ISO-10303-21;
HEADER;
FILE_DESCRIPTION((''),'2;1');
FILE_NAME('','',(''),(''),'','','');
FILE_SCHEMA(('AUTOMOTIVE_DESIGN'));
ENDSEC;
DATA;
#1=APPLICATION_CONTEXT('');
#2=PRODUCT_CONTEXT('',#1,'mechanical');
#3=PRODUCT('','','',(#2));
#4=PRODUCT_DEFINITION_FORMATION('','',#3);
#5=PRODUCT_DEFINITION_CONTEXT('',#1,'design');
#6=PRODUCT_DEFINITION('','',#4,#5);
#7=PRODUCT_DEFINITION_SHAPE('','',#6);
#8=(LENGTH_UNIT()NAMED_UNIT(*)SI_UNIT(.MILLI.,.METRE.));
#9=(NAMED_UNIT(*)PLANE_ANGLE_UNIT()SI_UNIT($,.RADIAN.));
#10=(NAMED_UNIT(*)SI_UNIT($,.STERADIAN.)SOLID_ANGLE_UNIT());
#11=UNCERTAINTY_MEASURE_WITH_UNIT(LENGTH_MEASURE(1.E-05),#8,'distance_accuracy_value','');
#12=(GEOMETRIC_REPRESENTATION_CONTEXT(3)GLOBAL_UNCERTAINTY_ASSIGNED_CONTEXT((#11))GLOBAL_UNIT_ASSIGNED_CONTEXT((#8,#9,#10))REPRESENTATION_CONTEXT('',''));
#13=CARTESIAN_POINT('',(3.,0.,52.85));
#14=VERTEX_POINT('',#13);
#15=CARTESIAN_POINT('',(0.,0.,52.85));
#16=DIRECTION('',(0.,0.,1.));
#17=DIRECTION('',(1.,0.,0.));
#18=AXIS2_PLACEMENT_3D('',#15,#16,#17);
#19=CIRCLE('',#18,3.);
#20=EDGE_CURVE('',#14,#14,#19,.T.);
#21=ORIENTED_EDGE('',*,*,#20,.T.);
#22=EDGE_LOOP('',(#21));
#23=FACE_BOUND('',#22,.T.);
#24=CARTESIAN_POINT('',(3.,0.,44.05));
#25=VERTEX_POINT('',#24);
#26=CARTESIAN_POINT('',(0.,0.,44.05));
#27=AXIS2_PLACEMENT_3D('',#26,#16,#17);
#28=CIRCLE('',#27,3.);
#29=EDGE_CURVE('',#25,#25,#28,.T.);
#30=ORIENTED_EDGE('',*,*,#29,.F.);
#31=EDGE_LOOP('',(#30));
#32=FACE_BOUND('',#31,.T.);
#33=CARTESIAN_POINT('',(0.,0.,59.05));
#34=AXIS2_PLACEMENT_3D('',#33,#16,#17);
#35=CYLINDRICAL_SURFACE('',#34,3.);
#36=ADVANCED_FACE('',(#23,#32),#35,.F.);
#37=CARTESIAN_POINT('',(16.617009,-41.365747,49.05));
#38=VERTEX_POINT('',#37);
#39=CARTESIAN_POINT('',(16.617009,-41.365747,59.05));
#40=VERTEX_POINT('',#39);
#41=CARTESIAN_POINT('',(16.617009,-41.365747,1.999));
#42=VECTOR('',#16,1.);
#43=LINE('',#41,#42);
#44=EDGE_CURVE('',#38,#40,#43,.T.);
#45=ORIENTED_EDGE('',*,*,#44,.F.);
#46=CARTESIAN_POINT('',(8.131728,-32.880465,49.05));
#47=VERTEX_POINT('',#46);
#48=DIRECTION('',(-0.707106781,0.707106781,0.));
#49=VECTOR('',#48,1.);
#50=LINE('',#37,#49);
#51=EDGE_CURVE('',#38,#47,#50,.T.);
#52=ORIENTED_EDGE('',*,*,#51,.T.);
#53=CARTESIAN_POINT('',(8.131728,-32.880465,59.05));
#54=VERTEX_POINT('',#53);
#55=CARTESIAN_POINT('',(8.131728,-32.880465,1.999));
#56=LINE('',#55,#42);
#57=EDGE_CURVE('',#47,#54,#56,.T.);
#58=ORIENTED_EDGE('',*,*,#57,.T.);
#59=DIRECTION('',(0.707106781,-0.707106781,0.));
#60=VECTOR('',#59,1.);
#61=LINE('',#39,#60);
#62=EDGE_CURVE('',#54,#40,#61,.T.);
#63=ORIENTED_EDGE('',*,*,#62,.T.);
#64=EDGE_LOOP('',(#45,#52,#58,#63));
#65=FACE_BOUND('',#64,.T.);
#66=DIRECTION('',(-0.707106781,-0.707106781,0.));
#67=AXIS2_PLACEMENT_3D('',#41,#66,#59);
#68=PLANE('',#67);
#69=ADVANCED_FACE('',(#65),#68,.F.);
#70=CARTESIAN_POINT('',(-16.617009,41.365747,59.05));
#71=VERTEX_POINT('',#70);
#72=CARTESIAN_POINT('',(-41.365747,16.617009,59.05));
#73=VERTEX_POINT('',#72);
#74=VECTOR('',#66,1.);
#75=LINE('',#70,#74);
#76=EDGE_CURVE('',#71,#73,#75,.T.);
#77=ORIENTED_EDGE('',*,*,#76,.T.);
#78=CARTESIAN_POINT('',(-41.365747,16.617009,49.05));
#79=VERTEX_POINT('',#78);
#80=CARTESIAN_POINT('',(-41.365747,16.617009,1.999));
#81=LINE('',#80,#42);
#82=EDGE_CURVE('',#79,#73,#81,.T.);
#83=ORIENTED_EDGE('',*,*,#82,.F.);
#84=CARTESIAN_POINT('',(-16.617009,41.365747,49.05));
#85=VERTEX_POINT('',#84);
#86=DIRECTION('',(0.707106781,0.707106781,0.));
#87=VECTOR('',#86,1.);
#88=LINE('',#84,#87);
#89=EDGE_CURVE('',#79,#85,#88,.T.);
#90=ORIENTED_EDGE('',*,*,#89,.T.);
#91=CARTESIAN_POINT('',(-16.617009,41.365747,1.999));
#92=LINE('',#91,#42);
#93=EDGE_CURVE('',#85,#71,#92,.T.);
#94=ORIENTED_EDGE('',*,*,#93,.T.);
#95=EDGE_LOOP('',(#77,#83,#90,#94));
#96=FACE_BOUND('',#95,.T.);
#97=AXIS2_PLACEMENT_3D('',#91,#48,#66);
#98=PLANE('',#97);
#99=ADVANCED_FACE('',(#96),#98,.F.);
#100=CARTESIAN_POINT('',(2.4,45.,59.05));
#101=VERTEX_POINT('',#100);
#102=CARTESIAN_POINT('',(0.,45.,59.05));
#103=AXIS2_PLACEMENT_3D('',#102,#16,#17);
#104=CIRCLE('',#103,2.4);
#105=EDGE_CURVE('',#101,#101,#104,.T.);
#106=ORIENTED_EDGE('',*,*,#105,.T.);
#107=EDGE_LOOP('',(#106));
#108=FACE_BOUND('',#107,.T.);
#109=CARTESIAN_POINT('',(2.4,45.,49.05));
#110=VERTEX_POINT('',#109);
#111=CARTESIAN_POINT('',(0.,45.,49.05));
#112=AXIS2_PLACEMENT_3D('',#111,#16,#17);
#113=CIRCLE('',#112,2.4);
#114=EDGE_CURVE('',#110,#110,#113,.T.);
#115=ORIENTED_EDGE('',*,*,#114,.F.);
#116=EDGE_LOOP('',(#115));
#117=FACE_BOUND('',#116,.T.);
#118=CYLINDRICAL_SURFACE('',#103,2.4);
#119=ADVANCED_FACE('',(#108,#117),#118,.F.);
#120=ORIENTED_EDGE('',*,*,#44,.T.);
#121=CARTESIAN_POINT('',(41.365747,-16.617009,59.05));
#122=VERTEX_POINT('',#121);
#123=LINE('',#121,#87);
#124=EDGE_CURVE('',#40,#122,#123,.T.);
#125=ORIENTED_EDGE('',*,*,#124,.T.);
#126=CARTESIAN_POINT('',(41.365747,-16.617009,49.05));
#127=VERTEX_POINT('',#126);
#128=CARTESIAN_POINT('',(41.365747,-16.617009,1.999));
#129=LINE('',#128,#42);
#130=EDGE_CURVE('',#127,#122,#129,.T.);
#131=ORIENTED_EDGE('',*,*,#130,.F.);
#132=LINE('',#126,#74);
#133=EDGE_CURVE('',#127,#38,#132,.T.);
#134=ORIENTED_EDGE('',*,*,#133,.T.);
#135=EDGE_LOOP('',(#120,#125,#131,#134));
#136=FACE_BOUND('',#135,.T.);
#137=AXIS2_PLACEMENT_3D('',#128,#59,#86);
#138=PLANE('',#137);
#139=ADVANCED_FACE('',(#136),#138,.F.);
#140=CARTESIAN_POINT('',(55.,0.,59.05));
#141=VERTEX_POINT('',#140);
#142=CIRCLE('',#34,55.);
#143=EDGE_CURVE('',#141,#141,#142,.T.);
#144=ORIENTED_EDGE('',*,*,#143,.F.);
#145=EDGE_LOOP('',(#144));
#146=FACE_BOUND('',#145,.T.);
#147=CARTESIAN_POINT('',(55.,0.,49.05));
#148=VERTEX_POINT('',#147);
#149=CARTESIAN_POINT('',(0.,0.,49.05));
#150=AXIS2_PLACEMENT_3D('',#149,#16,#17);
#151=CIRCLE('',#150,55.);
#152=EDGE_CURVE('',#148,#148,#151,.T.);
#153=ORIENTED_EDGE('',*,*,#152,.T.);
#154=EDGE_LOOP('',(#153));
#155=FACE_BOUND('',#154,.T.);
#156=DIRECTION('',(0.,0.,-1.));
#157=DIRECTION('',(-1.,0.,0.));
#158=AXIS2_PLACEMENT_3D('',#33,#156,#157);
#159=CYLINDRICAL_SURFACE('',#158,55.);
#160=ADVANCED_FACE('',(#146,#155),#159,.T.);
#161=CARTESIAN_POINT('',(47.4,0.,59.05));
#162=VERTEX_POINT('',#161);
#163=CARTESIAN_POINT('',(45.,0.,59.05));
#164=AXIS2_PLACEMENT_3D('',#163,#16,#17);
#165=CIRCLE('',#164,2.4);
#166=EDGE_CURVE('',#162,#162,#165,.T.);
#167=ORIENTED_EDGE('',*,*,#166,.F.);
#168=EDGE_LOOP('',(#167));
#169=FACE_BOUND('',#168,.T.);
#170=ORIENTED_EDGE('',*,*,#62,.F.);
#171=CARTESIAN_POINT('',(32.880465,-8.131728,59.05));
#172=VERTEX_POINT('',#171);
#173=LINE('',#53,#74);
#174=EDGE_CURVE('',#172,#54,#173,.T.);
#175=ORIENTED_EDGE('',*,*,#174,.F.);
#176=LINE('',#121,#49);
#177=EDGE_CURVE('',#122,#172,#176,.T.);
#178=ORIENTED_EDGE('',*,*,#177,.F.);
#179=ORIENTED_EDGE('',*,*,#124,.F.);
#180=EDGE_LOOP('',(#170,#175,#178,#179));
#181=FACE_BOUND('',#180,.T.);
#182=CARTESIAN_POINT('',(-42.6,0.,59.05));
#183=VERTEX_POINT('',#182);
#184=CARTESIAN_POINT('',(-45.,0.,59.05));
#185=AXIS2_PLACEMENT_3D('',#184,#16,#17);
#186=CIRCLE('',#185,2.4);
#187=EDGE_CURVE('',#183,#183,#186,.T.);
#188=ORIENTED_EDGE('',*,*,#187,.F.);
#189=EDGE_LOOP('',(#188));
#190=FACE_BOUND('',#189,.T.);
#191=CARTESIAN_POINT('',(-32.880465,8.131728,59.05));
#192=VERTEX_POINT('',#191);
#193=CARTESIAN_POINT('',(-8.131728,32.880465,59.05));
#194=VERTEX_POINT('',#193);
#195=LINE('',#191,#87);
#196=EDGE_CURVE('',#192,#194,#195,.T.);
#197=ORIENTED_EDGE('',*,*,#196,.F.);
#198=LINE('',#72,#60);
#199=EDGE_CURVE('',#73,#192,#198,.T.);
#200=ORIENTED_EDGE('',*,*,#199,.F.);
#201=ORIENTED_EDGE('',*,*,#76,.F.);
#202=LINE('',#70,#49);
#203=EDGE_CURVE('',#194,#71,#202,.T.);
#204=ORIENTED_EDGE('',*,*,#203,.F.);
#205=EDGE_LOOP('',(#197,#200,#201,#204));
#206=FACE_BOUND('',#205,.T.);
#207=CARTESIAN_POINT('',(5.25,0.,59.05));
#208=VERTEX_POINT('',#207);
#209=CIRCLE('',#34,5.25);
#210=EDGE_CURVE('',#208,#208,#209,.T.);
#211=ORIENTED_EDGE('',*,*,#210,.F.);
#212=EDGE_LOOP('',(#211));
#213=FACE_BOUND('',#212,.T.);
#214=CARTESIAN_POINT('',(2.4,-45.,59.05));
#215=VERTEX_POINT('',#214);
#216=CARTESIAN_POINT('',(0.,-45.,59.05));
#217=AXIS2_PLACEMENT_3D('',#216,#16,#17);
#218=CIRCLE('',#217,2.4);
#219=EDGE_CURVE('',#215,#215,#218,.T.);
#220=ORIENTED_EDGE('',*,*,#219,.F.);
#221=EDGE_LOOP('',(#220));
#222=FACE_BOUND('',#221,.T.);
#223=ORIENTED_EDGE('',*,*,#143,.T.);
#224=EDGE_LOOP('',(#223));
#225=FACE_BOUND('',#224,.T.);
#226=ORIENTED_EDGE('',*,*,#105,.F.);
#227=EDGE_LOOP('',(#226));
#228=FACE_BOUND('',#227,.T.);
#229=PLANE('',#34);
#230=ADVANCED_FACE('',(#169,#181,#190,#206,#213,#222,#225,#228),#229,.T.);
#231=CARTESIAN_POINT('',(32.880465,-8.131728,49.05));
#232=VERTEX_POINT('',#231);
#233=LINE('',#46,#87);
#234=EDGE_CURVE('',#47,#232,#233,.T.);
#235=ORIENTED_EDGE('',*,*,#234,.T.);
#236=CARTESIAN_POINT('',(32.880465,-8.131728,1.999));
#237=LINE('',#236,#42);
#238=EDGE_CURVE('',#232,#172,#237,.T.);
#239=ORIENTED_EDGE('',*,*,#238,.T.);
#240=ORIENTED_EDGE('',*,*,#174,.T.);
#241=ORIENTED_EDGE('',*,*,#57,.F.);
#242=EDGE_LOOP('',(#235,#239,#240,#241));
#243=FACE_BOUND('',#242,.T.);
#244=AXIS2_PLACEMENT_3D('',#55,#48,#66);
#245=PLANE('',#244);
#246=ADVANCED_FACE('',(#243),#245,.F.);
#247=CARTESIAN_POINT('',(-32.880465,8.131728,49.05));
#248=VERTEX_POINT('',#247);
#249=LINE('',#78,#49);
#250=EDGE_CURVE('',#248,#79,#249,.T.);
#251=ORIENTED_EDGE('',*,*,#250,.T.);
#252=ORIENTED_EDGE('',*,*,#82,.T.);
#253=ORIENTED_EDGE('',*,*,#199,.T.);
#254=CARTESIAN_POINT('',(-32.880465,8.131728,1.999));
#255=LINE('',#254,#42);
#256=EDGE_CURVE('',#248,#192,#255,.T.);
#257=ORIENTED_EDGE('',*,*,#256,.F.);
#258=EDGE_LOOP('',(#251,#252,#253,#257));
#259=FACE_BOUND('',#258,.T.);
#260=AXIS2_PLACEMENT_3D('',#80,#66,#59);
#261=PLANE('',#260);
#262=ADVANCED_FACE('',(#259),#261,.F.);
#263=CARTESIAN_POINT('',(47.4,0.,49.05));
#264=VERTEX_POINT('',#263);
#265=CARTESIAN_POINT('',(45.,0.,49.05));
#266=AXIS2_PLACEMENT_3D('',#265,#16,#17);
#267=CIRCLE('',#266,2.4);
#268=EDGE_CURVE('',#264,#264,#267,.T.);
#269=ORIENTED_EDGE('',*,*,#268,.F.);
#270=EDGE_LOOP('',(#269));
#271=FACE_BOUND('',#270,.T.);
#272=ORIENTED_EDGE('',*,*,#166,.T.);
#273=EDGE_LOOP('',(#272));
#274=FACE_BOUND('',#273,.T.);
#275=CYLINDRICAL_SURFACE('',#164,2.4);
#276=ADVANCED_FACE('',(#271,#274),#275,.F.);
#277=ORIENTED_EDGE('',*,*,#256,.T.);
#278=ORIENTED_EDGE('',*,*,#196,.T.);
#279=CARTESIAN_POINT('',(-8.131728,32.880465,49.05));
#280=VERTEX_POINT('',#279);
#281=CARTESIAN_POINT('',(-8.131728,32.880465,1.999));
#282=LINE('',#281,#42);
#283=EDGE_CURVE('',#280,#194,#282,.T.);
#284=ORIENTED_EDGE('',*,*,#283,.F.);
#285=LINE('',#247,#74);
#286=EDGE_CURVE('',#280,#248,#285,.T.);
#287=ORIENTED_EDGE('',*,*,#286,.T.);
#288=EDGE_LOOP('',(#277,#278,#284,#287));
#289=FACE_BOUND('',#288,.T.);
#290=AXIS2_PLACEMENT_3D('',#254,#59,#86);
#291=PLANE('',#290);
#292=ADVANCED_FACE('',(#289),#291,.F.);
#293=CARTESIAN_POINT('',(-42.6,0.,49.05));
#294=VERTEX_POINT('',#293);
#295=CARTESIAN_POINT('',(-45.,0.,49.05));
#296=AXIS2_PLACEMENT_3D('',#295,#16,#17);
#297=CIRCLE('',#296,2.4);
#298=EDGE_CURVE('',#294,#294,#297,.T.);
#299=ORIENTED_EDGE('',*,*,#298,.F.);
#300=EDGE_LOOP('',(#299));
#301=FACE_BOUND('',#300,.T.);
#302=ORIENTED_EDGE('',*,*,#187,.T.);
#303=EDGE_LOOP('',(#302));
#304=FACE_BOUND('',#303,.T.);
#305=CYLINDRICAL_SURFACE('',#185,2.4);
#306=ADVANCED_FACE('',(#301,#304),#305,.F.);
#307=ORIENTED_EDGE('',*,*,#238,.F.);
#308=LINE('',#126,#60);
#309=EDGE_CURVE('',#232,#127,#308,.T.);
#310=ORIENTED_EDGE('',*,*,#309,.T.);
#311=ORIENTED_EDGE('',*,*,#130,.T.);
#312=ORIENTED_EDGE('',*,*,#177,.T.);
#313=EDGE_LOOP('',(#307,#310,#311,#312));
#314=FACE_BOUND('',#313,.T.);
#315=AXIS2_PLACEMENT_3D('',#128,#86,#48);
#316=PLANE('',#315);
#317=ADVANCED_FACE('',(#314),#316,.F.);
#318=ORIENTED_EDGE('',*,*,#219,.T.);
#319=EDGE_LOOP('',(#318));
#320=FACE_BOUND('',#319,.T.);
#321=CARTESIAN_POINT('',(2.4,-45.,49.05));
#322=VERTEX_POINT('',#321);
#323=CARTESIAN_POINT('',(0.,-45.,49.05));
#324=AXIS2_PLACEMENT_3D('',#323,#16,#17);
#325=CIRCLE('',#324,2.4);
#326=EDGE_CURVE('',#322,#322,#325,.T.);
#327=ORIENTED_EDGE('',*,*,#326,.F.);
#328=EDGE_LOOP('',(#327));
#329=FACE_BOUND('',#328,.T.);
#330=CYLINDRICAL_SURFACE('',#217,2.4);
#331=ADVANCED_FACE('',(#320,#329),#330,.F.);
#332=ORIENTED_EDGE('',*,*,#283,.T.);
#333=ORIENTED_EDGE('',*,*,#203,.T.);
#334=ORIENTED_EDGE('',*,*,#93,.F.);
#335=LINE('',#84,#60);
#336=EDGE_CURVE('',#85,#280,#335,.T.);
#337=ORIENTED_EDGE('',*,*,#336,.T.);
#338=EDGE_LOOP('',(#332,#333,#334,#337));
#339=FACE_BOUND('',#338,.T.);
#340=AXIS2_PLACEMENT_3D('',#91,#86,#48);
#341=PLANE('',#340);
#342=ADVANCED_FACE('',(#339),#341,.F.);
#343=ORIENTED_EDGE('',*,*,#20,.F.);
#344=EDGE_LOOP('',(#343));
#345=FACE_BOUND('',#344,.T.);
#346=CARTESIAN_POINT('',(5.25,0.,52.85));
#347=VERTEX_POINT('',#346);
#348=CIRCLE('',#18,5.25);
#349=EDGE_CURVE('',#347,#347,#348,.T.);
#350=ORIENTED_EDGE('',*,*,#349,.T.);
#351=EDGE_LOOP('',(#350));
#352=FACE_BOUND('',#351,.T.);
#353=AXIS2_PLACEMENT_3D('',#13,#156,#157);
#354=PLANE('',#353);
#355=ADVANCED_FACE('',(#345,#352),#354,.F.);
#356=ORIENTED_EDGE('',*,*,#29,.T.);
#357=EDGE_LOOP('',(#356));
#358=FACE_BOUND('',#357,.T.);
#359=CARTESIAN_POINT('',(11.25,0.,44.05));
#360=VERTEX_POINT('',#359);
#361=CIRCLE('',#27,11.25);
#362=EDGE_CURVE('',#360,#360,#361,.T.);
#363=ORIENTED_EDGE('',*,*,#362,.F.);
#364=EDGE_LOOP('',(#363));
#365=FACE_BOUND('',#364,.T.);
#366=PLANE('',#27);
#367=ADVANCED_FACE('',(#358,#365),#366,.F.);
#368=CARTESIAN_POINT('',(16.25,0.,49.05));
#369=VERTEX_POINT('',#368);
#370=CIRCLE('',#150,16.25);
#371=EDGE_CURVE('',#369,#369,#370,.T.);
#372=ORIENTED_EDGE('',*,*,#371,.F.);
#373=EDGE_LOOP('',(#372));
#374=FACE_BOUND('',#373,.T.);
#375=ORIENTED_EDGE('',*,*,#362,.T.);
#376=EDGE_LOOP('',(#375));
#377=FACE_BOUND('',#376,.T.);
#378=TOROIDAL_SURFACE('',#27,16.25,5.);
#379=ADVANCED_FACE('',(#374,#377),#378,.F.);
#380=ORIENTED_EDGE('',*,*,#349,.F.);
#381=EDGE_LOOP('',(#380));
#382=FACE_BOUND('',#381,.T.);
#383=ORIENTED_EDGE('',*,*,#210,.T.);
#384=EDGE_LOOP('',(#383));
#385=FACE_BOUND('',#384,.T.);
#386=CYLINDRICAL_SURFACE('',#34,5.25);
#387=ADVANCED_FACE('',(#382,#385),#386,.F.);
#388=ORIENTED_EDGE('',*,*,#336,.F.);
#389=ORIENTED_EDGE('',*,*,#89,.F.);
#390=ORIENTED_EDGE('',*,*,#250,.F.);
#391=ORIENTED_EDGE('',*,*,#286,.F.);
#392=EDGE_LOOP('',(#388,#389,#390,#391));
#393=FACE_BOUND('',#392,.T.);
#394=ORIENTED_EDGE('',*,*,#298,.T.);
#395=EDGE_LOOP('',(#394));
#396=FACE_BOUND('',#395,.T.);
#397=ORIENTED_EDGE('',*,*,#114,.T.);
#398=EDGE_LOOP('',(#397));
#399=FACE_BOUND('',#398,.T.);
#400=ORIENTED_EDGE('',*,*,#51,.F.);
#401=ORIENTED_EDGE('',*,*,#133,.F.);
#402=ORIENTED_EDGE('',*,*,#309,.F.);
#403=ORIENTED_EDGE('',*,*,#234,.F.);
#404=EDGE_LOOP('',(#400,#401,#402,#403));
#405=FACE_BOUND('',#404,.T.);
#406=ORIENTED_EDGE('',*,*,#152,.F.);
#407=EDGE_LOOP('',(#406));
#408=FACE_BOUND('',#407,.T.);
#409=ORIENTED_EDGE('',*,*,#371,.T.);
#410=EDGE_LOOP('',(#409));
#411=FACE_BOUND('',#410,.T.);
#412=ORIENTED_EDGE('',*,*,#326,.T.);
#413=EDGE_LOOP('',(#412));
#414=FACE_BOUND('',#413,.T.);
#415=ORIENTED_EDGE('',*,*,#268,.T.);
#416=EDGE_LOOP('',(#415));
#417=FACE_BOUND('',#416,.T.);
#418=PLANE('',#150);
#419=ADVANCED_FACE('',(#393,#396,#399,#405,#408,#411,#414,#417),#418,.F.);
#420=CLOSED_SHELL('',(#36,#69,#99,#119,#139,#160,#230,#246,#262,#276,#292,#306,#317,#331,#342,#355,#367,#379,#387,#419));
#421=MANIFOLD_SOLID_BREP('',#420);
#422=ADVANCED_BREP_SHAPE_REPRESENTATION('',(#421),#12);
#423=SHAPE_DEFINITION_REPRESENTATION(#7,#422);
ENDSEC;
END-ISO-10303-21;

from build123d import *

# Parameters (mm, degrees)
SKETCH1_R                               = 7.5
BOSS_EXTRUDE1_DEPTH                     = 20.05
SKETCH3_W                               = 5
SKETCH3_H                               = 5
CUT_EXTRUDE1_DEPTH                      = 21
SKETCH6_R                               = 8.5
BOSS_EXTRUDE2_DEPTH                     = 24
SKETCH7_R                               = 11.25
BOSS_EXTRUDE3_DEPTH                     = 5
SKETCH8_R                               = 55
BOSS_EXTRUDE4_DEPTH                     = 10
FILLET1_R                               = 0.6
FILLET2_R                               = 5
M4_CLEARANCE_HOLE1_D                    = 4.8
M6X1_0_TAPPED_HOLE2_D                   = 5
M6X1_0_TAPPED_HOLE2_DEPTH               = 23.497848452
M6X1_0_TAPPED_HOLE2_TIP                 = 1.502151548
SKETCH13_R                              = 7.5
CUT_EXTRUDE2_DEPTH                      = 2
CUT_EXTRUDE3_REACH                      = 98.461
SKETCH15_R                              = 36.682415144
CUT_EXTRUDE4_DEPTH                      = 42.05
CBORE_FOR_M6_HEX_HEAD_BOLT1_D           = 6
CBORE_FOR_M6_HEX_HEAD_BOLT1_CBORE_D     = 10.5
CBORE_FOR_M6_HEX_HEAD_BOLT1_CBORE_DEPTH = 6.2


with BuildPart() as part:
    # Sketch1 → Boss-Extrude1 (new body)
    with BuildSketch(Plane.XY):
        Circle(SKETCH1_R)
    extrude(amount=BOSS_EXTRUDE1_DEPTH)

    # Sketch3 → Cut-Extrude1 (cut)
    with BuildSketch(Plane(origin=(0, 0, 0), x_dir=(-1, 0, 0), z_dir=(0, 0, -1))):
        with Locations((0, 7.5)):
            Rectangle(SKETCH3_W, SKETCH3_H)
    extrude(amount=-CUT_EXTRUDE1_DEPTH, mode=Mode.SUBTRACT)

    # Sketch6 → Boss-Extrude2 (add)
    with BuildSketch(Plane.XY.offset(20.05)):
        Circle(SKETCH6_R)
    extrude(amount=BOSS_EXTRUDE2_DEPTH)

    # Sketch7 → Boss-Extrude3 (add)
    with BuildSketch(Plane.XY.offset(44.05)):
        Circle(SKETCH7_R)
    extrude(amount=BOSS_EXTRUDE3_DEPTH)

    # Sketch8 → Boss-Extrude4 (add)
    with BuildSketch(Plane.XY.offset(49.05)):
        Circle(SKETCH8_R)
    extrude(amount=BOSS_EXTRUDE4_DEPTH)

    # Fillet1
    fillet1_edges = [part.edges().sort_by_distance(p)[0] for p in [
        (-8.5, 0, 44.05),
    ]]
    fillet(fillet1_edges, radius=FILLET1_R)

    # Fillet2
    fillet2_edges = [part.edges().sort_by_distance(p)[0] for p in [
        (-11.25, 0, 49.05),
    ]]
    fillet(fillet2_edges, radius=FILLET2_R - 0.0001)  # a hair under: the kernel refuses the full size

    # M4 Clearance Hole1 (through all)
    with Locations(Plane.XY.offset(59.05)):
        with Locations((0, 45), (0, -45), (45, 0), (-45, 0)):
            Hole(M4_CLEARANCE_HOLE1_D / 2)

    # M6x1.0 Tapped Hole2
    with Locations(Plane(origin=(0, 0, 0), x_dir=(-1, 0, 0), z_dir=(0, 0, -1))):
        with Locations((0, 0)):
            Hole(M6X1_0_TAPPED_HOLE2_D / 2, depth=M6X1_0_TAPPED_HOLE2_DEPTH)
            with Locations((0, 0, -(M6X1_0_TAPPED_HOLE2_DEPTH + M6X1_0_TAPPED_HOLE2_TIP / 2))):  # 118° drill point
                Cone(0, M6X1_0_TAPPED_HOLE2_D / 2, M6X1_0_TAPPED_HOLE2_TIP, mode=Mode.SUBTRACT)

    # Sketch13 → Cut-Extrude2 (cut)
    with BuildSketch(Plane(origin=(0, 0, 0), x_dir=(-1, 0, 0), z_dir=(0, 0, -1))):
        Circle(SKETCH13_R)
    extrude(amount=-CUT_EXTRUDE2_DEPTH, mode=Mode.SUBTRACT)

    # Sketch14 → Cut-Extrude3 (cut, up to next)
    with BuildSketch(Plane.XY.offset(59.05), mode=Mode.PRIVATE) as cut_extrude3_sk1:
        Polygon((-16.617009358, 41.365746699), (-41.365746699, 16.617009358), (-32.880465325, 8.131727984), (-8.131727984, 32.880465325), align=None)
    cut_extrude3_tool1 = extrude(cut_extrude3_sk1.sketch, amount=-CUT_EXTRUDE3_REACH, mode=Mode.PRIVATE) & part.part
    # Sketch14 → Cut-Extrude3 (cut, up to next)
    with BuildSketch(Plane.XY.offset(59.05), mode=Mode.PRIVATE) as cut_extrude3_sk2:
        Polygon((41.365746699, -16.617009358), (16.617009358, -41.365746699), (8.131727984, -32.880465325), (32.880465325, -8.131727984), align=None)
    cut_extrude3_tool2 = extrude(cut_extrude3_sk2.sketch, amount=-CUT_EXTRUDE3_REACH, mode=Mode.PRIVATE) & part.part
    add(cut_extrude3_tool1.solids().sort_by_distance((-24.748737, 24.748737, 59.05))[0], mode=Mode.SUBTRACT)
    add(cut_extrude3_tool2.solids().sort_by_distance((24.748737, -24.748737, 59.05))[0], mode=Mode.SUBTRACT)

    # Sketch15 → Cut-Extrude4 (cut)
    with BuildSketch(Plane(origin=(0, 0, 2), x_dir=(-1, 0, 0), z_dir=(0, 0, -1))):
        Circle(SKETCH15_R)
    extrude(amount=-CUT_EXTRUDE4_DEPTH, mode=Mode.SUBTRACT)

    # CBORE for M6 Hex Head Bolt1 (through all)
    with Locations(Plane.XY.offset(59.05)):
        with Locations((0, 0)):
            CounterBoreHole(CBORE_FOR_M6_HEX_HEAD_BOLT1_D / 2, CBORE_FOR_M6_HEX_HEAD_BOLT1_CBORE_D / 2, CBORE_FOR_M6_HEX_HEAD_BOLT1_CBORE_DEPTH)


solid = part.part
